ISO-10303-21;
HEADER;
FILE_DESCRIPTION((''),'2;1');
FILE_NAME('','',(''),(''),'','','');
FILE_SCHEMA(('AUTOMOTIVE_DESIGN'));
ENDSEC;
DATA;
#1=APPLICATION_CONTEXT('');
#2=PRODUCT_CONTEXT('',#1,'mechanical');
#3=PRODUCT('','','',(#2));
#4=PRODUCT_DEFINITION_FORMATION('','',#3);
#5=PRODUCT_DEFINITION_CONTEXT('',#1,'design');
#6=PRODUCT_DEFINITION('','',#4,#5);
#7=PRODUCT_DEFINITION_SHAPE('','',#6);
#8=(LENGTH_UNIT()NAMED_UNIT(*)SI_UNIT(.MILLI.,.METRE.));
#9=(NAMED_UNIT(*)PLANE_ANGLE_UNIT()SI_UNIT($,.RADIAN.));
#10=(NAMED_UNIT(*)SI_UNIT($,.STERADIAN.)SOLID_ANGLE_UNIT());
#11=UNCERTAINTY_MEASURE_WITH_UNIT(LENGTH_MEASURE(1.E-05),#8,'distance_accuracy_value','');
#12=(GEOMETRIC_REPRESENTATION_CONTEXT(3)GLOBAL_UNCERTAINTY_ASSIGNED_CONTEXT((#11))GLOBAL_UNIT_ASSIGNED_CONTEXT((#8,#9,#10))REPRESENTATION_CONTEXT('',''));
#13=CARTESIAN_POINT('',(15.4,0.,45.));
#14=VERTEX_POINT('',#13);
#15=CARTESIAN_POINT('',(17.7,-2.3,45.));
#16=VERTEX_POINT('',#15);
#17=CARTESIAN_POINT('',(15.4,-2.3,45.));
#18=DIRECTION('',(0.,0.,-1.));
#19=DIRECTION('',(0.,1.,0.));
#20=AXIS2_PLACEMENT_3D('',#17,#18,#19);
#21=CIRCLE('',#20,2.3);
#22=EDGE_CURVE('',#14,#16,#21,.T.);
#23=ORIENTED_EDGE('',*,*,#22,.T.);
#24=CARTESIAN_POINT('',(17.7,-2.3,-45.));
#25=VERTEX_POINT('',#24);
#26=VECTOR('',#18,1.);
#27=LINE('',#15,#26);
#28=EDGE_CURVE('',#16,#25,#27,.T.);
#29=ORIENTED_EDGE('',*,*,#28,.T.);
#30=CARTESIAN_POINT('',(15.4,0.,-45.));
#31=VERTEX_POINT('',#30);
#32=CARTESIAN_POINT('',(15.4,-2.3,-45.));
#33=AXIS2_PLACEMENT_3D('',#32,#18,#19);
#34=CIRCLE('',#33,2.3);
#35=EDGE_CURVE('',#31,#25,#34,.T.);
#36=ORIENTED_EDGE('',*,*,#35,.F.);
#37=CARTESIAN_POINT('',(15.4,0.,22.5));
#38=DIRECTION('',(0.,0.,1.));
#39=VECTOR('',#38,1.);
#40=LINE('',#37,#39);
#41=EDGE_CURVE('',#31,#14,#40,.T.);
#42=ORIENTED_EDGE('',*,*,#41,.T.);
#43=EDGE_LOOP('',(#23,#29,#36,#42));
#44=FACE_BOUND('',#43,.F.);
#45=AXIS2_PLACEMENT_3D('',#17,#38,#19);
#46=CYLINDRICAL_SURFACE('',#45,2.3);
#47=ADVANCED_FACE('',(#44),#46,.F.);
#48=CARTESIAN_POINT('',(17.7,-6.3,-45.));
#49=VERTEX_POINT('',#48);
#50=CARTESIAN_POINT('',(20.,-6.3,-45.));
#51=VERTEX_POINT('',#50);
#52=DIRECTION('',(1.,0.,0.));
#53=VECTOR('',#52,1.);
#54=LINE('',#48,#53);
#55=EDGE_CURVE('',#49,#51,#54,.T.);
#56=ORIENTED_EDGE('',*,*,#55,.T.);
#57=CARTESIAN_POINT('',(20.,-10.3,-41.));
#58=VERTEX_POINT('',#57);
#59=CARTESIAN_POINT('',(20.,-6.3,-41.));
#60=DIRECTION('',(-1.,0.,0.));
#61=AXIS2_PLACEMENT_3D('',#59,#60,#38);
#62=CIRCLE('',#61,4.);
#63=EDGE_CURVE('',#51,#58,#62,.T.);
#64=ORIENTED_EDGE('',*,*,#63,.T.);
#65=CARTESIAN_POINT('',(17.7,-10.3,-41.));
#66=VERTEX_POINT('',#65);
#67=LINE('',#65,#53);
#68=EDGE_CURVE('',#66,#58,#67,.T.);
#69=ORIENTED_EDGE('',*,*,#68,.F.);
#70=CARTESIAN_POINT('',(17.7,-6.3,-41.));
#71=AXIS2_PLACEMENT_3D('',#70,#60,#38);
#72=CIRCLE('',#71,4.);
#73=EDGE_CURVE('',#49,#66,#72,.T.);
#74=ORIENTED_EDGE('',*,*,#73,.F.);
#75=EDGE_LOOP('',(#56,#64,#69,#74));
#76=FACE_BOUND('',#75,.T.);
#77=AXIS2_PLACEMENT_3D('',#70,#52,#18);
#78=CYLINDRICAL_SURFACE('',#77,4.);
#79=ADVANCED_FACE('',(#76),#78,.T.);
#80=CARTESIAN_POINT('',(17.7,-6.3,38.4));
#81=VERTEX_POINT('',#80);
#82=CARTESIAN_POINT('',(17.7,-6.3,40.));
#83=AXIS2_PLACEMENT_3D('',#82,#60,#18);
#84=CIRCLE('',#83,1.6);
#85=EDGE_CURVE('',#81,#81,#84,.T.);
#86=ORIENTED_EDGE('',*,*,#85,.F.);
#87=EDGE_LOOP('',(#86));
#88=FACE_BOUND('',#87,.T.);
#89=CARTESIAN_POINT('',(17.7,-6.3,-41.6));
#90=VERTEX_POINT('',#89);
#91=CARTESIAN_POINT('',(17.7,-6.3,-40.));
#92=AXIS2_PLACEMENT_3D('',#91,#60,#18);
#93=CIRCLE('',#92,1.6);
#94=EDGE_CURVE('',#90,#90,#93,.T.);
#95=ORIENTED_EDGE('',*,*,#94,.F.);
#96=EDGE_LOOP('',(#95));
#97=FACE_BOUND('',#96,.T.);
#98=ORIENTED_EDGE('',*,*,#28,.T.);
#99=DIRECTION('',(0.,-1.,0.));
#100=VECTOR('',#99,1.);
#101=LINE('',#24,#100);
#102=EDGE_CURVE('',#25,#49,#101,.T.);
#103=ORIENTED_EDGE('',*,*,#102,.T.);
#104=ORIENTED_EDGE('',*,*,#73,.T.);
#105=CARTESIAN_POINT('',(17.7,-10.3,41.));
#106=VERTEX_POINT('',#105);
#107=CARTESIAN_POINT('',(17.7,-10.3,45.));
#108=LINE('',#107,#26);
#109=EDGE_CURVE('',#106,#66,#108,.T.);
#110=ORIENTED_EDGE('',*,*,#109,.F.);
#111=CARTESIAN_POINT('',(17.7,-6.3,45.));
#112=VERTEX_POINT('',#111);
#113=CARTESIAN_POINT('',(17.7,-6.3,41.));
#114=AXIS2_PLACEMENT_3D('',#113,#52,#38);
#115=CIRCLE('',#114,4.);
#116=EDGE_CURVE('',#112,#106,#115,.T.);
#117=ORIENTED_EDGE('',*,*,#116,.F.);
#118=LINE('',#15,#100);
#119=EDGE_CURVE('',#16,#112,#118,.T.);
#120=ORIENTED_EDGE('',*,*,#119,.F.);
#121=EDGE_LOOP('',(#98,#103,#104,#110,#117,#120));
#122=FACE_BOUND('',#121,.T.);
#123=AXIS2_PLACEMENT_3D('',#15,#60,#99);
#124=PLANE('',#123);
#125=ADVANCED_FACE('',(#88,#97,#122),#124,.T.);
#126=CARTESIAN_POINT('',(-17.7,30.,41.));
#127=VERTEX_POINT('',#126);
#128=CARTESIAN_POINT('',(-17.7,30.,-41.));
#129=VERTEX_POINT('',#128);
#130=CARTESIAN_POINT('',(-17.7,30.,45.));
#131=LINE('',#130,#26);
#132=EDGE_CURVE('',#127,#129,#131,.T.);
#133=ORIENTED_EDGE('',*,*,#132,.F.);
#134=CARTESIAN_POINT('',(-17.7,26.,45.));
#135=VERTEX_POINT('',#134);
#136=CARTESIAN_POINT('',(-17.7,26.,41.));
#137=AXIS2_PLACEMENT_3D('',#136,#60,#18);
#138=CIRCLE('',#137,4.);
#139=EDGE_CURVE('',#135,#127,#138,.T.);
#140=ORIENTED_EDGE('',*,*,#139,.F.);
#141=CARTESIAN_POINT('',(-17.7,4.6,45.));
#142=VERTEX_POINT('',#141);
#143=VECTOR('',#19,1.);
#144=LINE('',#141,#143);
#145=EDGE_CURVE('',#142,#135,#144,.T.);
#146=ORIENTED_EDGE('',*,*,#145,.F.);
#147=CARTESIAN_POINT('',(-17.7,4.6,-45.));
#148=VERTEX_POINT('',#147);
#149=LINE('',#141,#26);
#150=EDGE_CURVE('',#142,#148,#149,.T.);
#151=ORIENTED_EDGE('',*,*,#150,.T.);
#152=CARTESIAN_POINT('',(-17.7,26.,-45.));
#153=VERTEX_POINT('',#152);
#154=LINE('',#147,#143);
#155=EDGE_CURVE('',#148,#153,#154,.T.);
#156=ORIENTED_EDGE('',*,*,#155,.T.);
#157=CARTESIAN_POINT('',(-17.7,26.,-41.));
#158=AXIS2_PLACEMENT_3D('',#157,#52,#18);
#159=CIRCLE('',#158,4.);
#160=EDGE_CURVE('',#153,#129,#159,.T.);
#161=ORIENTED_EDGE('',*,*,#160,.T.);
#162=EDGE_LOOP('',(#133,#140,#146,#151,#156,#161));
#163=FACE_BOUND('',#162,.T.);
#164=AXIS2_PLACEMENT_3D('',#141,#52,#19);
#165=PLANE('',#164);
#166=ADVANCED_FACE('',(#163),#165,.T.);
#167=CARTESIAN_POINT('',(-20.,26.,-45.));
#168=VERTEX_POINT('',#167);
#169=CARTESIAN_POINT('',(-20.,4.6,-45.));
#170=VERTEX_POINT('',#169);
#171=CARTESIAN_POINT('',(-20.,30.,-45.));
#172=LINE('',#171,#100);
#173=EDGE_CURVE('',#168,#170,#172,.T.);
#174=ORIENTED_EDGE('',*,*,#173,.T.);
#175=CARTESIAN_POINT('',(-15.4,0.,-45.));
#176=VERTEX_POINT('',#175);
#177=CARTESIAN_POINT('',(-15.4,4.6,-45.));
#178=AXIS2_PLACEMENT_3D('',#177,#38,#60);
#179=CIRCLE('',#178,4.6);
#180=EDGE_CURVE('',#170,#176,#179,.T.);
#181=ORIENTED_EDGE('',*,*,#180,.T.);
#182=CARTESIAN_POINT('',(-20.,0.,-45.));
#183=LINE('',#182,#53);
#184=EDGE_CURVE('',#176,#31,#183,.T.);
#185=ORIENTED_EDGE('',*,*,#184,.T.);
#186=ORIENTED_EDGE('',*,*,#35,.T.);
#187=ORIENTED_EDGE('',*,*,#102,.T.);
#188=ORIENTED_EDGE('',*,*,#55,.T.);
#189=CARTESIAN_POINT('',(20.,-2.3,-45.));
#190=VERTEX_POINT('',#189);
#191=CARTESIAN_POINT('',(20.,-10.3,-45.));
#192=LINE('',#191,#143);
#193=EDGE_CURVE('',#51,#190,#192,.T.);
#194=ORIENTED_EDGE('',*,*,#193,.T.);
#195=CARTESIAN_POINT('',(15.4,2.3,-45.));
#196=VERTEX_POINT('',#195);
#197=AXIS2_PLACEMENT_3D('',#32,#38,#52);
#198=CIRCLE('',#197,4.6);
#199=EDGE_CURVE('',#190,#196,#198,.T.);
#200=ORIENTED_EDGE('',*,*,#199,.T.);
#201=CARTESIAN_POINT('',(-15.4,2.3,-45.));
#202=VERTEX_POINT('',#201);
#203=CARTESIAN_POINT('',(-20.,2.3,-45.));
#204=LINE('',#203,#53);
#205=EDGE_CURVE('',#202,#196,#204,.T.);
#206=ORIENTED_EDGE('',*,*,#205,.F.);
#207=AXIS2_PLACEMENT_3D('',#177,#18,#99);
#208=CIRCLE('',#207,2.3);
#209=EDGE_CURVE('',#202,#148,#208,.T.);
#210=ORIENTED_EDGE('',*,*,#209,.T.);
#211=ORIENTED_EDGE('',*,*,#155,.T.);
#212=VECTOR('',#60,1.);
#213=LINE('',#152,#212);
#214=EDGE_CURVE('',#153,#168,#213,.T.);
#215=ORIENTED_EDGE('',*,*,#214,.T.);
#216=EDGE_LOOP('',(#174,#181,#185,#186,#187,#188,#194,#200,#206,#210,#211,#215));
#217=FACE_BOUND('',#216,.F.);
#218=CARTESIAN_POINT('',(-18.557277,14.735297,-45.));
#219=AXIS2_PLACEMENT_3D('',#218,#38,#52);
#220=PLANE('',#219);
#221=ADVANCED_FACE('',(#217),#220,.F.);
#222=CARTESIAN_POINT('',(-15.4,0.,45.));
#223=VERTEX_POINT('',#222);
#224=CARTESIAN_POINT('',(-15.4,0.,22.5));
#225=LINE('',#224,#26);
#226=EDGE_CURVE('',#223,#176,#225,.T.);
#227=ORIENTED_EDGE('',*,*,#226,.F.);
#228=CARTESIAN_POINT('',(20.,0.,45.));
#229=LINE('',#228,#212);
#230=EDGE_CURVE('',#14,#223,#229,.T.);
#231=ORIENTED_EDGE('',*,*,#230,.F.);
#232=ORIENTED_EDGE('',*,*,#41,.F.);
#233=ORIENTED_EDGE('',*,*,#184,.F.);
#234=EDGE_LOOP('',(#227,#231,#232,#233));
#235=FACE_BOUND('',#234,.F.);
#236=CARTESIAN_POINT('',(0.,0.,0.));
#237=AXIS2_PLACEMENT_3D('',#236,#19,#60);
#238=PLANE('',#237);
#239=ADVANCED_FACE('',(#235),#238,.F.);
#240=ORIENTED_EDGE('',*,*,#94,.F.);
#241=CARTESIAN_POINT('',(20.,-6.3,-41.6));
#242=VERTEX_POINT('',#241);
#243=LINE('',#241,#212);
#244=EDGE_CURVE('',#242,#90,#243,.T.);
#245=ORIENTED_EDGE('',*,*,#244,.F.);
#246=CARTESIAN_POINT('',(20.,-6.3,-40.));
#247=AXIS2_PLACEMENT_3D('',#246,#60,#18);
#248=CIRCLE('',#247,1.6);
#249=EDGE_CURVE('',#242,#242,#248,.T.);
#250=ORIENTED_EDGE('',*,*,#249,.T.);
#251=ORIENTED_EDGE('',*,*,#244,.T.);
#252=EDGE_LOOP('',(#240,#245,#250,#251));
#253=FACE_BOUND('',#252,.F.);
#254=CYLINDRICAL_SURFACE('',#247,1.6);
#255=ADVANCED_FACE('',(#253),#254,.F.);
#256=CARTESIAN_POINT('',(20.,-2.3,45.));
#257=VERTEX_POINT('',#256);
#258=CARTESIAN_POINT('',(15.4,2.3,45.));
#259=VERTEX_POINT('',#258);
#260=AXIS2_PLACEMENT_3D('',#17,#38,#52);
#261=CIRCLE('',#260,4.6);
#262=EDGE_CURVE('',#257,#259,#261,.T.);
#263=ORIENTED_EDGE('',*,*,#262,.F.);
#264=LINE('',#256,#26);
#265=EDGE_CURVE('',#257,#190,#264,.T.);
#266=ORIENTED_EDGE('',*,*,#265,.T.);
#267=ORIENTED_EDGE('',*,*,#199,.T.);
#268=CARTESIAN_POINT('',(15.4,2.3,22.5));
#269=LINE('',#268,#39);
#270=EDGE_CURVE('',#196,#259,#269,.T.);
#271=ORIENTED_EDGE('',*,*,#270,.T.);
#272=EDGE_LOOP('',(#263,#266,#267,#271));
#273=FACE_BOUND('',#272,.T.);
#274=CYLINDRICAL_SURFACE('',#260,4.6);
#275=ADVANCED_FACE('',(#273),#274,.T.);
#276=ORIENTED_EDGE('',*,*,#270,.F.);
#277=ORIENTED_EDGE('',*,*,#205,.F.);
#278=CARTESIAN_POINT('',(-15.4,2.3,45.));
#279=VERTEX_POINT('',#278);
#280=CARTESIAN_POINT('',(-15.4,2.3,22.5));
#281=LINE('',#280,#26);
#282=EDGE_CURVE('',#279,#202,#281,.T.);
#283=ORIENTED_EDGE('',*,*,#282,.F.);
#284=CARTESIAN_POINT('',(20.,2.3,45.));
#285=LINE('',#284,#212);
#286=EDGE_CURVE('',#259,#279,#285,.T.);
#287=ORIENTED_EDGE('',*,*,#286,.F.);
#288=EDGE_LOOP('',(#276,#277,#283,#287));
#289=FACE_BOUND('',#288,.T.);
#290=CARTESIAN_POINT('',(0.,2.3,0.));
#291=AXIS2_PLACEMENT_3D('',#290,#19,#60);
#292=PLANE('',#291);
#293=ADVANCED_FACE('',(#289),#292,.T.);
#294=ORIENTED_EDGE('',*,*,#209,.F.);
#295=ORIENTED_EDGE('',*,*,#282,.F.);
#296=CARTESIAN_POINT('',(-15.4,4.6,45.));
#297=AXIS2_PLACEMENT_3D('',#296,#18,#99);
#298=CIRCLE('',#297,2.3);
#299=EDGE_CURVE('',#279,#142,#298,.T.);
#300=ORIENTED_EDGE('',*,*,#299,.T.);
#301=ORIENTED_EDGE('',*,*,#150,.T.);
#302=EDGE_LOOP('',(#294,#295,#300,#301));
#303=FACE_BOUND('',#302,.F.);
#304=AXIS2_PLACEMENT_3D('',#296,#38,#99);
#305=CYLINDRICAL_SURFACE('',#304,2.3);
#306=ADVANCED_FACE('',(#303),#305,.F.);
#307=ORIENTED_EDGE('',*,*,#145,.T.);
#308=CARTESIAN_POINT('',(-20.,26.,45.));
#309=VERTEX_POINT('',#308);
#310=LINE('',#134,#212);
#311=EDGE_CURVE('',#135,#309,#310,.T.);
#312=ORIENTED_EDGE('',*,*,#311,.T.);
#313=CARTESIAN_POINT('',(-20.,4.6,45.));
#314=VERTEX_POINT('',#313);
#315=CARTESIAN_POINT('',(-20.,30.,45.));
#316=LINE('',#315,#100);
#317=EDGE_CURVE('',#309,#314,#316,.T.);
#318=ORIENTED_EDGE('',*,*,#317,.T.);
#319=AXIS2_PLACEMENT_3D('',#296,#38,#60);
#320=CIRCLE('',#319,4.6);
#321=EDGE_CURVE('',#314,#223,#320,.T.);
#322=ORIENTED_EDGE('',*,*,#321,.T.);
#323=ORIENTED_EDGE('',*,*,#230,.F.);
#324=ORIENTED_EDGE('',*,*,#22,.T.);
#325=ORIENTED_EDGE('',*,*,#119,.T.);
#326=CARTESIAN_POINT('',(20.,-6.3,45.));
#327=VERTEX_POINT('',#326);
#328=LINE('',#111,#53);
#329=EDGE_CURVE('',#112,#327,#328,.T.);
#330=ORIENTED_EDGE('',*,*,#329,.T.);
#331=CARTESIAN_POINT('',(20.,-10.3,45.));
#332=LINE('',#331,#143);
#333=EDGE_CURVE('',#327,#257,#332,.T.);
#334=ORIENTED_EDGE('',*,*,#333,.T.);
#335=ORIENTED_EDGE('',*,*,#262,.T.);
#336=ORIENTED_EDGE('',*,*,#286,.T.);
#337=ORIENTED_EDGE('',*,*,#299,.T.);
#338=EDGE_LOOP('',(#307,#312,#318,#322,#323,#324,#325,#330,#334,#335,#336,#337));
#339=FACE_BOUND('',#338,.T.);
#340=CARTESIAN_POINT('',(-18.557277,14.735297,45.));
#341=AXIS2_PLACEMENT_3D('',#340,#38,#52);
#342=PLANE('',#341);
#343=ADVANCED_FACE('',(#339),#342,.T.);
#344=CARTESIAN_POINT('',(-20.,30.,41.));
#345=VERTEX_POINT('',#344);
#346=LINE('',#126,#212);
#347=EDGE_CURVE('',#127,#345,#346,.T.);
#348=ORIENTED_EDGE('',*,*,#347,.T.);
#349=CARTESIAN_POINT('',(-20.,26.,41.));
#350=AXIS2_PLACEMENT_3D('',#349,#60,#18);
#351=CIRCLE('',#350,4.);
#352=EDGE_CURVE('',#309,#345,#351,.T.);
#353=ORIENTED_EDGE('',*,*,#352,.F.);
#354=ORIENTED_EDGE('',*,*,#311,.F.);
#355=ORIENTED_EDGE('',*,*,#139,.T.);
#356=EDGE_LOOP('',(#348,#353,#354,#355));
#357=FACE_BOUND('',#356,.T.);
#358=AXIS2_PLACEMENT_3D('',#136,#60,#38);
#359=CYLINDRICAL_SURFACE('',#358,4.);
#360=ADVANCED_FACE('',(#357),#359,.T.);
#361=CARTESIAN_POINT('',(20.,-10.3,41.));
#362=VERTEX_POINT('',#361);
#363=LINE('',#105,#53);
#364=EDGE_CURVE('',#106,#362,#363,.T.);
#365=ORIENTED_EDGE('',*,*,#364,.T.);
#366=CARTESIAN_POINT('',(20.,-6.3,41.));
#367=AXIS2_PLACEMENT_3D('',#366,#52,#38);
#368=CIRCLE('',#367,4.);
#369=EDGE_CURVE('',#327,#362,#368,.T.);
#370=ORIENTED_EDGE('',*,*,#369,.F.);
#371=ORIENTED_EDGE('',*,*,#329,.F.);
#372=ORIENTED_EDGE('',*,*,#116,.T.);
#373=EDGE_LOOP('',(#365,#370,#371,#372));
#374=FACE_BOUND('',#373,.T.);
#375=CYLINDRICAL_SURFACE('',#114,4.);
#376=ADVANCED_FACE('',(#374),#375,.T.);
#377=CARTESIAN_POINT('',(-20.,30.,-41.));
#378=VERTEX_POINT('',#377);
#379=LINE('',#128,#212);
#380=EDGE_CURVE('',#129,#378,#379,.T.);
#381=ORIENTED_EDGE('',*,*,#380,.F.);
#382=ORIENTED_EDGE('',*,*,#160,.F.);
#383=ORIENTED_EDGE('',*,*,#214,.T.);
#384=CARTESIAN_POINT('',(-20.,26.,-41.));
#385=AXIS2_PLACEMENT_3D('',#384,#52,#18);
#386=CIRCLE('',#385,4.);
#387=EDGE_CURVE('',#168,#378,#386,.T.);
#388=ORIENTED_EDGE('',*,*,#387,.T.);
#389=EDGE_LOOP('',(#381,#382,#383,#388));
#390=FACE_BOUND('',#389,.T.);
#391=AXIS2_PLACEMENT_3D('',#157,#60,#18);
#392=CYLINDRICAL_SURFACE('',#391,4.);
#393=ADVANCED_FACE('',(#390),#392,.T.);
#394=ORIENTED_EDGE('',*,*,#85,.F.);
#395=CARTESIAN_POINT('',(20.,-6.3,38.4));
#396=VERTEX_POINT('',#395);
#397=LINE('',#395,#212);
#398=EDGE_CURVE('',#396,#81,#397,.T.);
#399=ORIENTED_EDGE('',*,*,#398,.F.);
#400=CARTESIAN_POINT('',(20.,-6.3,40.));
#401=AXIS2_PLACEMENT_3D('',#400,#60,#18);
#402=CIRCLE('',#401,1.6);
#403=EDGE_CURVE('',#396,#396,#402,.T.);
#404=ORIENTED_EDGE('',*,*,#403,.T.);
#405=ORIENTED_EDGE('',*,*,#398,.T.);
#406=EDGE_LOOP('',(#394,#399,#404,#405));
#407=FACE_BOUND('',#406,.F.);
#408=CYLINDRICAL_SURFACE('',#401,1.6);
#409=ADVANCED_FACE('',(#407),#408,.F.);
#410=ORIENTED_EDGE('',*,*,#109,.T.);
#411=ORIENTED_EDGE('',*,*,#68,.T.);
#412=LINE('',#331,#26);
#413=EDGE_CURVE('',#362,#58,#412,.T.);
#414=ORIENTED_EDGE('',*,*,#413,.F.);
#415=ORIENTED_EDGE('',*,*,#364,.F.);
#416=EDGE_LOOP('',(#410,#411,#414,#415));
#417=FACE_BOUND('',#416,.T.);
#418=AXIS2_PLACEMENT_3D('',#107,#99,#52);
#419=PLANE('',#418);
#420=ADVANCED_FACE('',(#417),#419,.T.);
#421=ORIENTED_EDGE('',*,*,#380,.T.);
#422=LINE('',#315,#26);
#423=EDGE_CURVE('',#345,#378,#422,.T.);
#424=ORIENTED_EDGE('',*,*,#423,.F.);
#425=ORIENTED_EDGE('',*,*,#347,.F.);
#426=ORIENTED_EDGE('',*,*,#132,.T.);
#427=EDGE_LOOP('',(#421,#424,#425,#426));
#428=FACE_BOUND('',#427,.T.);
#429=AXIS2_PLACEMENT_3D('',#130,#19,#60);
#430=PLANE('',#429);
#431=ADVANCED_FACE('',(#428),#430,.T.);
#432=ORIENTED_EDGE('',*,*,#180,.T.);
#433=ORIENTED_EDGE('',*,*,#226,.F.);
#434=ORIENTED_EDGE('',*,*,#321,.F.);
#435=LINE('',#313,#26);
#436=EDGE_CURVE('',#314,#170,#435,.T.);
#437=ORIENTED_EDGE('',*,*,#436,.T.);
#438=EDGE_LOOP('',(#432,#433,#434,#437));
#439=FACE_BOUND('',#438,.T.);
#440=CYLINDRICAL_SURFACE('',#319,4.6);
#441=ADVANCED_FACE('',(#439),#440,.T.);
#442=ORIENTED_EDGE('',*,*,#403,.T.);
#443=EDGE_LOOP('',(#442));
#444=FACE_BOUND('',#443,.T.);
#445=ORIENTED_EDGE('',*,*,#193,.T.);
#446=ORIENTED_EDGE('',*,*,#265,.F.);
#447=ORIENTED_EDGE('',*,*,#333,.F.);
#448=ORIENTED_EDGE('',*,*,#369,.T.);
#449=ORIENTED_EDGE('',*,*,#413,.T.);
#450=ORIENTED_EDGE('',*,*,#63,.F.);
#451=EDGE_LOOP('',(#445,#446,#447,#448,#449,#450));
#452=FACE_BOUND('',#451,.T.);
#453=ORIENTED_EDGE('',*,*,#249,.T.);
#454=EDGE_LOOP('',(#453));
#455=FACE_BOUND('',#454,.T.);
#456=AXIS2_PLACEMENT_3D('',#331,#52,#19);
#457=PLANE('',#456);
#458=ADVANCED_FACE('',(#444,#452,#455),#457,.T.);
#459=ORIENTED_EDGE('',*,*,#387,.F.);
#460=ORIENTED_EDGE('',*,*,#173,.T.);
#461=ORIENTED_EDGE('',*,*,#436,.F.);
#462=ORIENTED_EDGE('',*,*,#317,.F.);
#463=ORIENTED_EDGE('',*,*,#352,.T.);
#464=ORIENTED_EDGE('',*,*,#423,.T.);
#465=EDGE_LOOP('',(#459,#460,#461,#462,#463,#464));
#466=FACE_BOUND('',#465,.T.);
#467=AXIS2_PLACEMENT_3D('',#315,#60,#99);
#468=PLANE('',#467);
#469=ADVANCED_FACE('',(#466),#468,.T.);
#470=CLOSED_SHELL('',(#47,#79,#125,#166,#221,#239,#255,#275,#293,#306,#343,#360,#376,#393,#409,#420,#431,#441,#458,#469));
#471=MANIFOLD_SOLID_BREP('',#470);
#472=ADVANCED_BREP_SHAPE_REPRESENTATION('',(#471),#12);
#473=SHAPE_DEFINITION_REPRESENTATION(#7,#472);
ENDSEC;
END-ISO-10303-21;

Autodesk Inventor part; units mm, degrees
ref_plane "YZ Plane" through (0, 0, 0) normal (1, 0, 0) x (0, 1, 0)
ref_plane "XZ Plane" through (0, 0, 0) normal (0, 1, 0) x (-1, 0, 0)
ref_plane "XY Plane" through (0, 0, 0) normal (0, 0, 1) x (1, 0, 0)
sketch "スケッチ1" plane through (0, 0, 0) normal (0, 1, 0) x (-1, 0, 0)
  line L0 (-20, 45) -> (20, 45)
  line L1 (20, 45) -> (20, -45)
  line L2 (20, -45) -> (-20, -45)
  line L3 (-20, -45) -> (-20, 45)
  line L4 (-20, 45) -> (20, -45) construction
  line L5 (20, 45) -> (-20, -45) construction
  point P0 (0, 0)
  dimension "d0" = 90
  dimension "d1" = 40
extrude "プレート1" add sketch "スケッチ1" along normal blind 2.3
sketch "スケッチ2" plane through (17.7, 2.3, 45) normal (1, 0, 0) x (0, 1, 0)
  line L0 (0, -90) -> (0, 0)
  line L1 (0, 0) -> (-12.6, 0)
  line L2 (-12.6, 0) -> (-12.6, -90)
  line L3 (-12.6, -90) -> (0, -90)
edge flange "フランジ1" height 12.6 angle 90 thickness 2.3 bend radius 2.3 thickness toward (1, 0, 0) relief tear relief width 2.3 relief depth 1.15 edges at (20, 0, 0) wall of the first edge with corners at (17.7, 2.3, -45) (17.7, 2.3, 45) (17.7, -10.3, 45) (17.7, -10.3, -45)
bend "曲げ1"
corner "コーナー1"
sketch "スケッチ3" plane through (-17.7, 0, 45) normal (-1, 0, 0) x (0, -1, 0)
  line L0 (0, -90) -> (0, 0)
  line L1 (0, 0) -> (-30, 0)
  line L2 (-30, 0) -> (-30, -90)
  line L3 (-30, -90) -> (0, -90)
edge flange "フランジ2" height 30 angle 90 thickness 2.3 bend radius 2.3 thickness toward (-1, 0, 0) relief tear relief width 2.3 relief depth 1.15 edges at (-20, 2.3, 0) wall of the first edge with corners at (-17.7, 0, -45) (-17.7, 0, 45) (-17.7, 30, 45) (-17.7, 30, -45)
bend "曲げ2"
corner "コーナー2"
sketch "スケッチ4" plane through (20, -10.3, 45) normal (1, 0, 0) x (0, 0, -1)
  line L0 (90, 0) -> (0, 0) projected
  line L1 (0, 0) -> (0, 8) projected
  point P0 (45, 10.3)
  point P1 (5, 4)
  point P2 (85, 4)
  dimension "d23" = 4
  dimension "d24" = 80
  dimension "d25" = 5
hole "穴1" at (20, -6.3, 40) at (20, -6.3, -40) direction (-1, 0, 0) diameter 3.2 depth 2.3 tip angle 118 clearance for "Flat Head Machine Screw" size "M3" standard "Ansi Metric M Profile"
fillet "コーナーR1" radius 4 4 edges at (18.85, -10.3, 45) (18.85, -10.3, -45) (-18.85, 30, -45) (-18.85, 30, 45)
equation "\"d31\" = Thickness"
equation "\"d2\" = Thickness"
equation "\"d3\" = BendReliefWidth"
equation "\"d4\" = BendReliefDepth"
equation "\"d5\" = MinimumRemnant"
equation "\"d6\" = TransitionRadius"
equation "\"d9\" = BendRadius"
equation "\"d10\" = CornerReliefSize"
equation "\"d11\" = GapSize"
equation "\"d12\" = JacobiRadiusSize"
equation "\"d13\" = BendReliefWidth"
equation "\"d14\" = BendReliefDepth"
equation "\"d15\" = MinimumRemnant"
equation "\"d16\" = TransitionRadius"
equation "\"d19\" = BendRadius"
equation "\"d20\" = CornerReliefSize"
equation "\"d21\" = GapSize"
equation "\"d22\" = JacobiRadiusSize"
equation "\"BendRadius\" = Thickness"
equation "\"BendReliefWidth\" = Thickness"
equation "\"BendReliefDepth\" = 0.5 * Thickness"
equation "\"CornerReliefSize\" = 4 * Thickness"
equation "\"MinimumRemnant\" = 2 * Thickness"
equation "\"TransitionRadius\" = BendRadius"
equation "\"JacobiRadiusSize\" = BendRadius"
equation "\"GapSize\" = Thickness"
equation "\"Thickness\" = 2.3"
properties part number "plate7" material "鋼、炭素鋼"
